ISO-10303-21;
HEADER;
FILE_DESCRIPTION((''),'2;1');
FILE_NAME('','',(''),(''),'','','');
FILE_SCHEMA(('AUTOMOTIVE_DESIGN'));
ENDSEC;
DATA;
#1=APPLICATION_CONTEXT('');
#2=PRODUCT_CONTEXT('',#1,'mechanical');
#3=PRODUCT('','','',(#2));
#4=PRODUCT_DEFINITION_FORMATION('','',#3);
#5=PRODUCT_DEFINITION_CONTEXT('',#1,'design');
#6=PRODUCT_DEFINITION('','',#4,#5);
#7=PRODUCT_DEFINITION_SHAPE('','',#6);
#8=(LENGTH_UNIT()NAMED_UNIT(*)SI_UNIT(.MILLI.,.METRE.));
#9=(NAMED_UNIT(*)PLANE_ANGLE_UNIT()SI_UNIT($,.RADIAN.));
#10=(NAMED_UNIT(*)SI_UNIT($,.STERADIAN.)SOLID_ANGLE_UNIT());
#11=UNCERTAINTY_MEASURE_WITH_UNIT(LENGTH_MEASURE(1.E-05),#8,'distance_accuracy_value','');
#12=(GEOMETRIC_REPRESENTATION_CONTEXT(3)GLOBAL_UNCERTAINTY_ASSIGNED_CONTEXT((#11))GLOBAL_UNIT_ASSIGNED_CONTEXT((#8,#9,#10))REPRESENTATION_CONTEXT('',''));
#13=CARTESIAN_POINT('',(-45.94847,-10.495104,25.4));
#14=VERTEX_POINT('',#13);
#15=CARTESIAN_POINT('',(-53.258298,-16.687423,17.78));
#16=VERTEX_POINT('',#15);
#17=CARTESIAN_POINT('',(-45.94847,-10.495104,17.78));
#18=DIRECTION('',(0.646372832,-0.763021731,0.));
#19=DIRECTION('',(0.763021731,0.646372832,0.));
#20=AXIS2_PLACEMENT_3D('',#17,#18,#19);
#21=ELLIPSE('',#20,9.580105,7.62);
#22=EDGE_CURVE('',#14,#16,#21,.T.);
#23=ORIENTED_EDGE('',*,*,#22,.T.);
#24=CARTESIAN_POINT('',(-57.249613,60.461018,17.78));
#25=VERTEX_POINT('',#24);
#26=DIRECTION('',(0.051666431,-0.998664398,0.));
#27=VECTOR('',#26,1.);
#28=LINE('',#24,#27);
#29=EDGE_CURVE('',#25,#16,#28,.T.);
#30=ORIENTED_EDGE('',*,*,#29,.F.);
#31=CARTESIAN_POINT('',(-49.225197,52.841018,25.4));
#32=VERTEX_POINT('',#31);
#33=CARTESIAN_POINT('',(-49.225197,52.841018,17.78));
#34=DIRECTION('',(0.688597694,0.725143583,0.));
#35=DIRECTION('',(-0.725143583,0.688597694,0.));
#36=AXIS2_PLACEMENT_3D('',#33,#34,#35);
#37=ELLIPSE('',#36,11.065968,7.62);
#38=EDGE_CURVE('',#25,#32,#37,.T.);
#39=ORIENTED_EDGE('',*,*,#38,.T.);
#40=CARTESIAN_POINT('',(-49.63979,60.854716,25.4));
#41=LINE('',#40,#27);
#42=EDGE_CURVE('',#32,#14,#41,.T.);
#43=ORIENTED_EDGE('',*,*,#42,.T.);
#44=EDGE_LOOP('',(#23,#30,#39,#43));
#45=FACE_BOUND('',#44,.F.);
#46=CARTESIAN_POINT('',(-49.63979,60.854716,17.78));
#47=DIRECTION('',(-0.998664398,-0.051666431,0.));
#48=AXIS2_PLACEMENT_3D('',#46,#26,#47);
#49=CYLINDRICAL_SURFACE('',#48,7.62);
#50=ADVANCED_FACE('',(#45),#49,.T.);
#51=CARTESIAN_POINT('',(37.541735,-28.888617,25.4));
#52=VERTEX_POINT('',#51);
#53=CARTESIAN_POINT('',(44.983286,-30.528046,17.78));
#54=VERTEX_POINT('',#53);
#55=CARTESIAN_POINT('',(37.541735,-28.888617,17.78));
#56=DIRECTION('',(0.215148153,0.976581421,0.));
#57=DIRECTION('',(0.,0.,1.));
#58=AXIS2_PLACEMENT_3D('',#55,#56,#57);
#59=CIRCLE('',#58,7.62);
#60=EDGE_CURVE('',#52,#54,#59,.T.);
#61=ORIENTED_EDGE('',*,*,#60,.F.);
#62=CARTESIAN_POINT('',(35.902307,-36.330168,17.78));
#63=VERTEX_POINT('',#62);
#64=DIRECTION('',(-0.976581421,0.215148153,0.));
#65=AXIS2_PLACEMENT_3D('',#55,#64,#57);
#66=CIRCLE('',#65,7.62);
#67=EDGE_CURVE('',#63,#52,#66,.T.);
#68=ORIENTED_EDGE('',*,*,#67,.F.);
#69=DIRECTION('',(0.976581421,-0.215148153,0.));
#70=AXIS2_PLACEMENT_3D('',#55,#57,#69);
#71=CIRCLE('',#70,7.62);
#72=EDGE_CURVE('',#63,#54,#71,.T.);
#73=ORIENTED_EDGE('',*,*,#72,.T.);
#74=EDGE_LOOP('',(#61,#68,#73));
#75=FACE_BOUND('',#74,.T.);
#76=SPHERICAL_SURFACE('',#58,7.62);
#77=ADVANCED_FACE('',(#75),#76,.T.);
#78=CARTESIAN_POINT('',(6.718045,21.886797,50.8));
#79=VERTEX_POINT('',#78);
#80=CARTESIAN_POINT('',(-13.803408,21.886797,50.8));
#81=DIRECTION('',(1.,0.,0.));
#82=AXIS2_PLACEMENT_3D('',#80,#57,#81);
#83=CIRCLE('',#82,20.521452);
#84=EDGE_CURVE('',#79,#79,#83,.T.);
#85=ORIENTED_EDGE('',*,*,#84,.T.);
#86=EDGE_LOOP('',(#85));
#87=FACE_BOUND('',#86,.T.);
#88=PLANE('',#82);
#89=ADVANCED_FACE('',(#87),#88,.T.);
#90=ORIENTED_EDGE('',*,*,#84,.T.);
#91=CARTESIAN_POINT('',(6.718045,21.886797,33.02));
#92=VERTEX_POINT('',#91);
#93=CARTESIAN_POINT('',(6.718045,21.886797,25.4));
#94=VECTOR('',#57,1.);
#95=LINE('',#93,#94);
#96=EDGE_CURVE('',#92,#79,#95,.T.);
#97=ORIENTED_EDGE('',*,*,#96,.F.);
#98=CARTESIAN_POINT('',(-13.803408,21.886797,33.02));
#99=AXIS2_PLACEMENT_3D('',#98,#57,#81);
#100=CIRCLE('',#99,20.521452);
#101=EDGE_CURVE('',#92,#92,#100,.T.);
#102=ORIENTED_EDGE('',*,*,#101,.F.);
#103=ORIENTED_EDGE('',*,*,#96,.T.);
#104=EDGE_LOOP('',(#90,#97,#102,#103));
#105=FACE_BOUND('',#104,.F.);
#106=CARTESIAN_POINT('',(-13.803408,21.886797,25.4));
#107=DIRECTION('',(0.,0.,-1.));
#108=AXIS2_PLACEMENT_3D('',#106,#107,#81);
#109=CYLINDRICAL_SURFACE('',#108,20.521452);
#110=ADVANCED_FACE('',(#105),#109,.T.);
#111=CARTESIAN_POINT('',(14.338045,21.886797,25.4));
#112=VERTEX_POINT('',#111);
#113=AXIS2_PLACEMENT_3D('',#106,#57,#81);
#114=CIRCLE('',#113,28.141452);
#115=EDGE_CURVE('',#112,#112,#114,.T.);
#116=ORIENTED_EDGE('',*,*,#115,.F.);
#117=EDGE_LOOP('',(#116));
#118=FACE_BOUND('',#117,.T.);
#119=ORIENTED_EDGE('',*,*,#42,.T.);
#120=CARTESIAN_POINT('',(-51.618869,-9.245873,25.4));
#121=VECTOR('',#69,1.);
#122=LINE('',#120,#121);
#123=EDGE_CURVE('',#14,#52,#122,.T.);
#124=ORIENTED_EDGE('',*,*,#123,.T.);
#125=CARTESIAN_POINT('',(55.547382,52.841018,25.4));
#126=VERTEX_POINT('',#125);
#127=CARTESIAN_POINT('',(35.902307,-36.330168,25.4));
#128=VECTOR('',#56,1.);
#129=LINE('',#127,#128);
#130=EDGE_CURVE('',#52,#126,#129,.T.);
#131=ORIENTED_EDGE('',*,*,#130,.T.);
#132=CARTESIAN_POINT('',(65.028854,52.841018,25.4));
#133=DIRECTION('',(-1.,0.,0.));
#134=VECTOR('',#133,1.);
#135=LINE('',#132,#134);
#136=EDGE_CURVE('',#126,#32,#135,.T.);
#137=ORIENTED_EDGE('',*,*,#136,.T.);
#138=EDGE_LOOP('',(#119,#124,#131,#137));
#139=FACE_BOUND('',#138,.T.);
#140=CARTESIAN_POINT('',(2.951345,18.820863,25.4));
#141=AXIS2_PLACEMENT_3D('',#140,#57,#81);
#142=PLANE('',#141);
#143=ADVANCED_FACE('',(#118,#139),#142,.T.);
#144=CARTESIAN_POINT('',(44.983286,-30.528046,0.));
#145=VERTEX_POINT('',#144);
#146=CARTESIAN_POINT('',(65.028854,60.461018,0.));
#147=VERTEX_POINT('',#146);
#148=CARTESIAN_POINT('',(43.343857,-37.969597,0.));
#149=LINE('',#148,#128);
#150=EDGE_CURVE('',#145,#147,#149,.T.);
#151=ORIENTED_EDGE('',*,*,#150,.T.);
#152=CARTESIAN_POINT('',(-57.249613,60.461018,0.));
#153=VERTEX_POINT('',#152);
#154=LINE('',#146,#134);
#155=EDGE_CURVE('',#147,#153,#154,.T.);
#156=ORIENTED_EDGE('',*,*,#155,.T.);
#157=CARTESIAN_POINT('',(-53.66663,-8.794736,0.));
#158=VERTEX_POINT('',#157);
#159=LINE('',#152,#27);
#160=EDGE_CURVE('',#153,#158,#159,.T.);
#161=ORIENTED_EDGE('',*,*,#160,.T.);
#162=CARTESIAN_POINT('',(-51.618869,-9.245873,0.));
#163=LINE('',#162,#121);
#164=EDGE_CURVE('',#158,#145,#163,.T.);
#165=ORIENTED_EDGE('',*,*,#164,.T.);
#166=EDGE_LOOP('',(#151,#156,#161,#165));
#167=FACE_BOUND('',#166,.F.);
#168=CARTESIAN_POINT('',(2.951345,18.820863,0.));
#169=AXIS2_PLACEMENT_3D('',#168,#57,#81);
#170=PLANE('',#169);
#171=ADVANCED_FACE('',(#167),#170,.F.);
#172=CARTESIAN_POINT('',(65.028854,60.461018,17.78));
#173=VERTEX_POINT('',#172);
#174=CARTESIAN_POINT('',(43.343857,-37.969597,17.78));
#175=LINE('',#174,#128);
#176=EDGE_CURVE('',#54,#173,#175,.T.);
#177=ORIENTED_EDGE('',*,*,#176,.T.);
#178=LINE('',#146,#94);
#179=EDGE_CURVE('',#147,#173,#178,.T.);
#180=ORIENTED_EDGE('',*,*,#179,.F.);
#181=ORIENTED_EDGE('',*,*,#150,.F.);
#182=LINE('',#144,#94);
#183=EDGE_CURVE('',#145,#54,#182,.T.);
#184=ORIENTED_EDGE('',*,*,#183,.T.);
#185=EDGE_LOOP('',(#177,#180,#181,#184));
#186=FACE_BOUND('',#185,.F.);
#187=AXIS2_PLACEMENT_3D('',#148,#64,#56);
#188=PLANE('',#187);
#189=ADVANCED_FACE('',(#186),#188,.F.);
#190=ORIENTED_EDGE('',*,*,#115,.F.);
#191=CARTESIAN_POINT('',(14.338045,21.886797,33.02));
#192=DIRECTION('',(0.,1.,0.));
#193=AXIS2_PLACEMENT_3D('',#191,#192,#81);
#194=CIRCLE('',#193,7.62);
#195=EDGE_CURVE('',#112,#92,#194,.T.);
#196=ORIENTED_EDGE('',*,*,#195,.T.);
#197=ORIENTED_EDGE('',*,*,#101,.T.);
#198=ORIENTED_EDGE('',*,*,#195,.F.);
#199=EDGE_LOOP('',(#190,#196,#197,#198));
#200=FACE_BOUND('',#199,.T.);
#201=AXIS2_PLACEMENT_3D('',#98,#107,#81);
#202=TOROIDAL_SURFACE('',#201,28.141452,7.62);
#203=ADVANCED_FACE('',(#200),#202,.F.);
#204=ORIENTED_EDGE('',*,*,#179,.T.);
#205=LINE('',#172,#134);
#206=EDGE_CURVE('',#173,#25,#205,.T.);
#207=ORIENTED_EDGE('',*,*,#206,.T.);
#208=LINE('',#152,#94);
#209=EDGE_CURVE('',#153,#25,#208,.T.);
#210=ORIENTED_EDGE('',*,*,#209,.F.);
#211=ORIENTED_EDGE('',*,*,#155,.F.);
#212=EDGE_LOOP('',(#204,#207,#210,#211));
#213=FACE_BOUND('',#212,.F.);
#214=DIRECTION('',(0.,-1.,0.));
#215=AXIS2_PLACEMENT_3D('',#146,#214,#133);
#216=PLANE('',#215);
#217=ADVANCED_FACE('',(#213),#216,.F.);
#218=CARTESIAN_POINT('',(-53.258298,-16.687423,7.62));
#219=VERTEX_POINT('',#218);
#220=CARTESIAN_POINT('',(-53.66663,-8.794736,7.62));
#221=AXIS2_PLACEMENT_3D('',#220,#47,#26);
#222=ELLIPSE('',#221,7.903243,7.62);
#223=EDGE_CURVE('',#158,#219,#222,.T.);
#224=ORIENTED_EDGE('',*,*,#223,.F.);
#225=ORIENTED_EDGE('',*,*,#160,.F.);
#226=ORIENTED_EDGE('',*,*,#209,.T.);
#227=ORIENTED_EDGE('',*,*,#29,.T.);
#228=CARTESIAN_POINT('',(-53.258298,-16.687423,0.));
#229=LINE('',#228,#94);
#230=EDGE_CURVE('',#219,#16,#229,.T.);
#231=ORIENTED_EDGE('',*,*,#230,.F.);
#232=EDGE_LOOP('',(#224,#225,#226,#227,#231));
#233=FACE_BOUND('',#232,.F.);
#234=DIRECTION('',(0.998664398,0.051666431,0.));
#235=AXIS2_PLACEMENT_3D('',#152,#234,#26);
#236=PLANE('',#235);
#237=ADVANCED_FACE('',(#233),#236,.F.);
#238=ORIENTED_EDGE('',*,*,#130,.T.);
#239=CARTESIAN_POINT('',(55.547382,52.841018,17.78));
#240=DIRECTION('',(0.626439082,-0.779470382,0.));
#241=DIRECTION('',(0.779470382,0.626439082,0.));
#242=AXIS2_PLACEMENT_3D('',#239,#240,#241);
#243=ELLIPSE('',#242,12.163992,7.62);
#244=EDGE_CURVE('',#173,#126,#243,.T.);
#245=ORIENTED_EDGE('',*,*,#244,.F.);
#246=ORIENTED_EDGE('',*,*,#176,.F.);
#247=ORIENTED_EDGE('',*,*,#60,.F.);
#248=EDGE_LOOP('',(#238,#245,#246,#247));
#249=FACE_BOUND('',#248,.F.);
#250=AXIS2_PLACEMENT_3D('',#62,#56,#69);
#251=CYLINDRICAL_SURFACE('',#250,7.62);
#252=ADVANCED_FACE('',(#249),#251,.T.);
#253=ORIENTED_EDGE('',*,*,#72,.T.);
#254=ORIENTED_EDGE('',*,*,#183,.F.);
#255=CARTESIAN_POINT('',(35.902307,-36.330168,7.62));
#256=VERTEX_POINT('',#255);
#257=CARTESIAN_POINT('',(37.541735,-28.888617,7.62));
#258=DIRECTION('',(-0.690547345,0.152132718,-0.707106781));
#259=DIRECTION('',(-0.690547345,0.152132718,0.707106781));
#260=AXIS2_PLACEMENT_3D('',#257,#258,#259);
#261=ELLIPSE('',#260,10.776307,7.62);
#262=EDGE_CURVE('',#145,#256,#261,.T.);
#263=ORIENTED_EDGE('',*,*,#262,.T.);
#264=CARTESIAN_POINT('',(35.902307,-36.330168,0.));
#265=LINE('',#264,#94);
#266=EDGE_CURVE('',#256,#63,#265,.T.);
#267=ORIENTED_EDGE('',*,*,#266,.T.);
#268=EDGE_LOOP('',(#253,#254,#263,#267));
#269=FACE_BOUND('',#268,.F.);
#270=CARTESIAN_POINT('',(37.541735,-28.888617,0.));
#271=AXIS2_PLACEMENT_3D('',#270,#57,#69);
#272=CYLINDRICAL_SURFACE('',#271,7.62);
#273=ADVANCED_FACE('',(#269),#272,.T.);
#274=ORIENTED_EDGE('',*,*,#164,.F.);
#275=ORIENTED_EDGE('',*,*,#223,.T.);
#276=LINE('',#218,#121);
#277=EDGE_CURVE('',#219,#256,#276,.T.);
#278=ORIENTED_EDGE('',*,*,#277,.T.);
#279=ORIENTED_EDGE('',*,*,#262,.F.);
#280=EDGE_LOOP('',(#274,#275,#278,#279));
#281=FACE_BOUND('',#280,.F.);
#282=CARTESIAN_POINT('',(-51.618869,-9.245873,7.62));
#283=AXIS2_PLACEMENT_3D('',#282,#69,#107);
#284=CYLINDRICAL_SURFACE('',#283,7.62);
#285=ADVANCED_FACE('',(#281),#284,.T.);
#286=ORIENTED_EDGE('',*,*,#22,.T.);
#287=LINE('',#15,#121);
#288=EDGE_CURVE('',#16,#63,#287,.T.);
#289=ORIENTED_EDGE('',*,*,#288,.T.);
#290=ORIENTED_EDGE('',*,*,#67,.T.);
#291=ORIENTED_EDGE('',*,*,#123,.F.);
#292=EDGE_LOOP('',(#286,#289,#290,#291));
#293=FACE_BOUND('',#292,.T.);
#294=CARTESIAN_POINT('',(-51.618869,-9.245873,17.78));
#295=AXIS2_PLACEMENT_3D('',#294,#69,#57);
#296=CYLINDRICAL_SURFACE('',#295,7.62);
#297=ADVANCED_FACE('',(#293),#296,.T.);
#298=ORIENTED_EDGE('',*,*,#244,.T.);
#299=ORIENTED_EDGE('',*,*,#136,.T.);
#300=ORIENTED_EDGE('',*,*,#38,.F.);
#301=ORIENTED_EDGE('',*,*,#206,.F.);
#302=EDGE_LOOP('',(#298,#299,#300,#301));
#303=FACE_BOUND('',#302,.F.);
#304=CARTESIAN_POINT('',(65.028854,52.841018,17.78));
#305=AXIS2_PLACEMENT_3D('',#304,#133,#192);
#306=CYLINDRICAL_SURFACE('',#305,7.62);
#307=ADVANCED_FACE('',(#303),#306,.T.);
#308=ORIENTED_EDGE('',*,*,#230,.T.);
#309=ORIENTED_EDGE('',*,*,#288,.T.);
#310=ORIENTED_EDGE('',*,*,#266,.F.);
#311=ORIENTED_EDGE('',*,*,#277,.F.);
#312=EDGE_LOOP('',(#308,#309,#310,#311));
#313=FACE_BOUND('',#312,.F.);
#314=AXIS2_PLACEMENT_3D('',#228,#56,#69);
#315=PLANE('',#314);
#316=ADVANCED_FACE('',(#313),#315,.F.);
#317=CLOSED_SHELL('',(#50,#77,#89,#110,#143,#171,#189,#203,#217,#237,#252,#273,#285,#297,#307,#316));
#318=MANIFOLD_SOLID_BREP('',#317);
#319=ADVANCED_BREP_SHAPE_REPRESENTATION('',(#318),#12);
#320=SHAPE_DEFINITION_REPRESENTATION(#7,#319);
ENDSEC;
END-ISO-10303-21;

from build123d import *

# Parameters (mm, degrees)
F1_DEPTH = 25.4
F2_R     = 20.5214520654
F3_DEPTH = 25.4
F4_R     = 7.62


# Not quite as in the source:
# - the program builds the solid bodies; features that only make, move or delete a surface that nothing else refers to are left out


with BuildPart() as f1:
    # F0 (on Top) → F1 (new body)
    with BuildSketch(Plane.XY):
        Polygon((65.0288537145, 60.4610182345), (-57.2496131063, 60.4610182345), (-53.2582976497, -16.6874233163), (43.3438569307, -37.969596684), align=None)
    extrude(amount=F1_DEPTH)

    # F2 (on face) → F3 (join)
    with BuildSketch(Plane.XY.offset(25.4)):
        with Locations((-13.8034075499, 21.8867974591)):
            Circle(F2_R)
    extrude(amount=F3_DEPTH)

    # F4
    f4_edges = [f1.edges().sort_by_distance(p)[0] for p in [
        (54.186355, 11.245711, 25.4),
        (-4.95722, -27.32851, 25.4),
        (3.88962, 60.461018, 25.4),
        (-55.253955, 21.886797, 25.4),
        (-34.32486, 21.886797, 25.4),
        (43.343857, -37.969597, 12.7),
        (-4.95722, -27.32851, 0),
    ]]
    fillet(f4_edges, radius=F4_R)


solid = f1.part
